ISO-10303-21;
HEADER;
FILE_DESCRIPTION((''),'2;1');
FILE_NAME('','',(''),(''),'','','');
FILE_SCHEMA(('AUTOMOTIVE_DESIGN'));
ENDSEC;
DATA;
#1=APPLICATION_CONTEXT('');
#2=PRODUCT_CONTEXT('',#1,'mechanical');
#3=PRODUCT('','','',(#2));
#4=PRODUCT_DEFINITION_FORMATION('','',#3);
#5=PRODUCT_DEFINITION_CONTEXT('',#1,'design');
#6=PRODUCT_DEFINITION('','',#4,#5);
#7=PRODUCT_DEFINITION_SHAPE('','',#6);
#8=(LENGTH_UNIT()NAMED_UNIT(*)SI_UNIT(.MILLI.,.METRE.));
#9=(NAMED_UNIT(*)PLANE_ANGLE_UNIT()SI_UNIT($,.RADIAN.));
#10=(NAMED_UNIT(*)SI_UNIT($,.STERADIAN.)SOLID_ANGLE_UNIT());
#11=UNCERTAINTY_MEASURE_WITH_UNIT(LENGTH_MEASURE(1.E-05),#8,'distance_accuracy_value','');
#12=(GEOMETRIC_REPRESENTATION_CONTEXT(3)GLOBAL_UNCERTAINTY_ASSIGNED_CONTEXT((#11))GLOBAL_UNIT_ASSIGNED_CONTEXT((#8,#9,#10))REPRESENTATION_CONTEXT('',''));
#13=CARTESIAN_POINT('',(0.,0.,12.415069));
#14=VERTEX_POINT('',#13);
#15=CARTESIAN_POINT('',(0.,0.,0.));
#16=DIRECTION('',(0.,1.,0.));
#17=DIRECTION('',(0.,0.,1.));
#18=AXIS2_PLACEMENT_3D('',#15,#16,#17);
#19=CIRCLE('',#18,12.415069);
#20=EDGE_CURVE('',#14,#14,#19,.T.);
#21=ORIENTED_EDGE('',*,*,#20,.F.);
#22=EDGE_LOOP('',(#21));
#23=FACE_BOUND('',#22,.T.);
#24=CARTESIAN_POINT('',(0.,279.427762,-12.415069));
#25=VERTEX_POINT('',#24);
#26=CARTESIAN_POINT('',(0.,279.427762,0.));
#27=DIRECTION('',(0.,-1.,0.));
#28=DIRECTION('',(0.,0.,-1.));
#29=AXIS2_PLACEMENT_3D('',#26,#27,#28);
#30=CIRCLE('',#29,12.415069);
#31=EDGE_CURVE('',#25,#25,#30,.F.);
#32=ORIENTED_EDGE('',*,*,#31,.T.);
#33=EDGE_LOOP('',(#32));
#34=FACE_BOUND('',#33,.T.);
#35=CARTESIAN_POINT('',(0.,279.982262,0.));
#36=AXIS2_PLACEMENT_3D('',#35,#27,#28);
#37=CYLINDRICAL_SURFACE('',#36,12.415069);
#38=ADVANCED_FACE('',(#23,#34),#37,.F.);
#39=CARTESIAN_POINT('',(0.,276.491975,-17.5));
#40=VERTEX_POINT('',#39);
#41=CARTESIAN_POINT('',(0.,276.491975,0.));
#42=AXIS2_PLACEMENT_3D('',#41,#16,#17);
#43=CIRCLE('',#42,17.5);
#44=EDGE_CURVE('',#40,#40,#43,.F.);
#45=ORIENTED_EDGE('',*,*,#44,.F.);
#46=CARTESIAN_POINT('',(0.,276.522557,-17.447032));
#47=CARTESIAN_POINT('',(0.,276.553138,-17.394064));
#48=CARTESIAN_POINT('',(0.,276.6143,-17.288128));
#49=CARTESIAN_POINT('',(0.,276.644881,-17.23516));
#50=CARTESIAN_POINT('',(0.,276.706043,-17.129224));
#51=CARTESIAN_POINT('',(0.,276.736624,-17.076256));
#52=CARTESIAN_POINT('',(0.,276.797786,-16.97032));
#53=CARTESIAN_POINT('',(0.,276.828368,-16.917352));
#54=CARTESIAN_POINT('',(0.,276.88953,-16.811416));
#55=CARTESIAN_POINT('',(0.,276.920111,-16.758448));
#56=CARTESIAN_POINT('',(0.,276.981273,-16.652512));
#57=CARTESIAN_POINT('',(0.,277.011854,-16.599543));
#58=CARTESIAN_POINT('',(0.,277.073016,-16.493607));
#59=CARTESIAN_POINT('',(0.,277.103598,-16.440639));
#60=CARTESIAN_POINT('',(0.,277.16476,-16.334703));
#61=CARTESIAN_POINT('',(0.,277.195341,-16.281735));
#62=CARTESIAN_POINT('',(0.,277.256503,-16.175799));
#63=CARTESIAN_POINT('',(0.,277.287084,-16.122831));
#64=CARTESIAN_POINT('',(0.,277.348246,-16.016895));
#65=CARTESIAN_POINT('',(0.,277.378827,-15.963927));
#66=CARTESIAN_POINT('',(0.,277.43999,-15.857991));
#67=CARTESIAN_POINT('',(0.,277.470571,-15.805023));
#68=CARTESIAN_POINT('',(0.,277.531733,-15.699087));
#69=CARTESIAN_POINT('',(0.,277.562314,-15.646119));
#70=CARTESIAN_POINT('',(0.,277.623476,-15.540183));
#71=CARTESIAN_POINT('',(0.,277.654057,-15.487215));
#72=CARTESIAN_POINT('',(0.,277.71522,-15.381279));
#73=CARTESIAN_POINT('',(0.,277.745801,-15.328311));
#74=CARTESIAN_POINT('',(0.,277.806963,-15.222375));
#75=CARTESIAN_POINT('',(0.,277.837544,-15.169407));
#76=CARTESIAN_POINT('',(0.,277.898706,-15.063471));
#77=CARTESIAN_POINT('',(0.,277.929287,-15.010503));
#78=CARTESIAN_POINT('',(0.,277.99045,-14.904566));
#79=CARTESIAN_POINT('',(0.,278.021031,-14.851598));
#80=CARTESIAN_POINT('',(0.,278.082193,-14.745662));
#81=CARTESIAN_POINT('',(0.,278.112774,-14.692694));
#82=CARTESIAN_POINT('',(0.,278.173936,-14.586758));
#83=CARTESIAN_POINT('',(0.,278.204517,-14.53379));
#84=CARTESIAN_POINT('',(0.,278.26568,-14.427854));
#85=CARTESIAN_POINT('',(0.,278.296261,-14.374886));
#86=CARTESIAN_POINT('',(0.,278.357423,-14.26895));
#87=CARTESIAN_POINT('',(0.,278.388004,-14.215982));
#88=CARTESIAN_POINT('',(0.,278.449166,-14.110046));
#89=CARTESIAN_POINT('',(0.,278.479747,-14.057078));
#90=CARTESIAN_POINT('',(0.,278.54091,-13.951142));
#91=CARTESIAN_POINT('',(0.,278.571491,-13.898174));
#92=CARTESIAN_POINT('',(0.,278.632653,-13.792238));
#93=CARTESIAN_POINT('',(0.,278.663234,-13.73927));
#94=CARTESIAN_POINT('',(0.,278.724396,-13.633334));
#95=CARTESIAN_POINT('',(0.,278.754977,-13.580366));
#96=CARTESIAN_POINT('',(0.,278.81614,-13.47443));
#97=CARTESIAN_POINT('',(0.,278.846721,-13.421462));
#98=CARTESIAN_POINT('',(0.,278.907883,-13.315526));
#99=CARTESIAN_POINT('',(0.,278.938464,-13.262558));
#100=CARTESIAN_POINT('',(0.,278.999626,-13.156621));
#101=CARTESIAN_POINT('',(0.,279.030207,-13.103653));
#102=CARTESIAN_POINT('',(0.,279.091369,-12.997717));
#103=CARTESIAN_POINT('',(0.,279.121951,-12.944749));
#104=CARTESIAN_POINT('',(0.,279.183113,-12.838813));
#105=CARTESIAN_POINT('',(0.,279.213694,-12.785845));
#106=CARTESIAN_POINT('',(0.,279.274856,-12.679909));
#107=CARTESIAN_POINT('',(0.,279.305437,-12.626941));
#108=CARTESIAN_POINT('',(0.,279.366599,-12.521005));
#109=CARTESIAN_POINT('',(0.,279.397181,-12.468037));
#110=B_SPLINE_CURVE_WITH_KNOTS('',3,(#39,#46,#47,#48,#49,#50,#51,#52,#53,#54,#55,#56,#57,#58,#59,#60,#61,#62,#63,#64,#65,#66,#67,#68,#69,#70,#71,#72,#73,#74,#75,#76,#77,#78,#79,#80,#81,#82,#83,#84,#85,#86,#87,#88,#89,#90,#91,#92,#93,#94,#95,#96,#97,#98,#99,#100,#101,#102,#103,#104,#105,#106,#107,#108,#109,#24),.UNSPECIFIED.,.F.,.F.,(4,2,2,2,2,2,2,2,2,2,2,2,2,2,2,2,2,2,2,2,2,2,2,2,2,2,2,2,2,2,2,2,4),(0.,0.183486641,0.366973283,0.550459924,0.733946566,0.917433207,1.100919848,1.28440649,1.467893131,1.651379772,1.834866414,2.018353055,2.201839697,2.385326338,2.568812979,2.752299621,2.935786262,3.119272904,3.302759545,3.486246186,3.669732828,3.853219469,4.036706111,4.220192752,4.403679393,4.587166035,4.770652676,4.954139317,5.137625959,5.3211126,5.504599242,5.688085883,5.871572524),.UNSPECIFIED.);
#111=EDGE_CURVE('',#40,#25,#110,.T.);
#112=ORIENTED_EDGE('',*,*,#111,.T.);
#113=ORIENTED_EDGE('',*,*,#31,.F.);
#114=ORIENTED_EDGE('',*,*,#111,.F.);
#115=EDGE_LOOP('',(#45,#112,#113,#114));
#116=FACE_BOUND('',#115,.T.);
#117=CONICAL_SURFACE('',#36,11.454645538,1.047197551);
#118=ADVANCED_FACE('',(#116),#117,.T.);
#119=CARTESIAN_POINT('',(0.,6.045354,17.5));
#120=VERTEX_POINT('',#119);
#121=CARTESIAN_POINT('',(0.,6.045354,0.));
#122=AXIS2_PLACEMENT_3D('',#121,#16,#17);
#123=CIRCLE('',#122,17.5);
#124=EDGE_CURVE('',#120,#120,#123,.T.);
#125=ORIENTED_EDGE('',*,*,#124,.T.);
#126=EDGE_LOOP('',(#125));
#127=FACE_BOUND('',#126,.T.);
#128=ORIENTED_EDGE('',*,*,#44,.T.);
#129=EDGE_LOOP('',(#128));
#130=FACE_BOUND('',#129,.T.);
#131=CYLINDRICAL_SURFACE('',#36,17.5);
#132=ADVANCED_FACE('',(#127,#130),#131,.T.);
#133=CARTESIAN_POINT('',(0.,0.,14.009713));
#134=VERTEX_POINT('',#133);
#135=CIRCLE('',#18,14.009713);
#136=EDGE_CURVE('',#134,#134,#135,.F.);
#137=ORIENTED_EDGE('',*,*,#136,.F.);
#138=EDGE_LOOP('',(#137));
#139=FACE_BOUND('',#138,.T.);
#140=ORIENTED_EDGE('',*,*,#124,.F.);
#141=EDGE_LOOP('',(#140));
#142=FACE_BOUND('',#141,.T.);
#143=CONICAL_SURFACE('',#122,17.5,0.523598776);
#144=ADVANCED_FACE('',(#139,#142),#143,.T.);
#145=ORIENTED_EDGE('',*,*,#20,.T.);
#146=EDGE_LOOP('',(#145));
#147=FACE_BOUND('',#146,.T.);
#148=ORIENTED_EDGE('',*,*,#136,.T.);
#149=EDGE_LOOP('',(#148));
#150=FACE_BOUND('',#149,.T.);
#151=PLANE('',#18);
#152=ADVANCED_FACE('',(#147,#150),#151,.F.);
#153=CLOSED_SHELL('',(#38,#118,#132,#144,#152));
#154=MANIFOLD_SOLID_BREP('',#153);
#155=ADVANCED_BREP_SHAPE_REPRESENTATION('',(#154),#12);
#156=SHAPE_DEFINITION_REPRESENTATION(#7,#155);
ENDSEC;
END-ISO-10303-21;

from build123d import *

# Parameters (mm, degrees)
SKETCH1_R           = 17.5
BOSS_EXTRUDE1_DEPTH = 279.982262
SKETCH2_R           = 12.415069034
CUT_EXTRUDE1_DEPTH  = 282.073952964
CHAMFER1_SIZE       = 3.490287
CHAMFER1_SIZE_2     = 6.045354


with BuildPart() as part:
    # Sketch1 → Boss-Extrude1 (new body)
    with BuildSketch(Plane(origin=(0, 0, 0), x_dir=(1, 0, 0), z_dir=(0, 1, 0))):
        with Locations(Location((0, 0, 0), (0, 0, 270))):
            Circle(SKETCH1_R)
    extrude(amount=BOSS_EXTRUDE1_DEPTH)

    # Sketch2 → Cut-Extrude1 (cut, through all)
    with BuildSketch(Plane(origin=(0, 0, 0), x_dir=(1, 0, 0), z_dir=(0, 1, 0))):
        with Locations(Location((0, 0, 0), (0, 0, 270))):
            Circle(SKETCH2_R)
    extrude(amount=CUT_EXTRUDE1_DEPTH, mode=Mode.SUBTRACT)

    # Chamfer1
    # the kernel refuses this chamfer: 6.045354, 3.490287 mm, written as the material it takes off along each edge
    with BuildSketch(Plane(origin=(0, 279.982262, 0), x_dir=(0, 0, 1), z_dir=(-1, 0, 0))) as chamfer1_piece_1:
        Polygon((17.5, -CHAMFER1_SIZE), (17.5 - CHAMFER1_SIZE_2, 0), (17.5, 0), align=None)
    revolve(axis=Axis((0, 279.982262, 0), (0, 1, 0)), mode=Mode.SUBTRACT)
    with BuildSketch(Plane(origin=(0, 0, 0), x_dir=(0, 0, 1), z_dir=(-1, 0, 0))) as chamfer1_piece_2:
        Polygon((17.5, CHAMFER1_SIZE_2), (17.5 - CHAMFER1_SIZE, 0), (17.5, 0), align=None)
    revolve(axis=Axis((0, 0, 0), (0, 1, 0)), mode=Mode.SUBTRACT)


solid = part.part
